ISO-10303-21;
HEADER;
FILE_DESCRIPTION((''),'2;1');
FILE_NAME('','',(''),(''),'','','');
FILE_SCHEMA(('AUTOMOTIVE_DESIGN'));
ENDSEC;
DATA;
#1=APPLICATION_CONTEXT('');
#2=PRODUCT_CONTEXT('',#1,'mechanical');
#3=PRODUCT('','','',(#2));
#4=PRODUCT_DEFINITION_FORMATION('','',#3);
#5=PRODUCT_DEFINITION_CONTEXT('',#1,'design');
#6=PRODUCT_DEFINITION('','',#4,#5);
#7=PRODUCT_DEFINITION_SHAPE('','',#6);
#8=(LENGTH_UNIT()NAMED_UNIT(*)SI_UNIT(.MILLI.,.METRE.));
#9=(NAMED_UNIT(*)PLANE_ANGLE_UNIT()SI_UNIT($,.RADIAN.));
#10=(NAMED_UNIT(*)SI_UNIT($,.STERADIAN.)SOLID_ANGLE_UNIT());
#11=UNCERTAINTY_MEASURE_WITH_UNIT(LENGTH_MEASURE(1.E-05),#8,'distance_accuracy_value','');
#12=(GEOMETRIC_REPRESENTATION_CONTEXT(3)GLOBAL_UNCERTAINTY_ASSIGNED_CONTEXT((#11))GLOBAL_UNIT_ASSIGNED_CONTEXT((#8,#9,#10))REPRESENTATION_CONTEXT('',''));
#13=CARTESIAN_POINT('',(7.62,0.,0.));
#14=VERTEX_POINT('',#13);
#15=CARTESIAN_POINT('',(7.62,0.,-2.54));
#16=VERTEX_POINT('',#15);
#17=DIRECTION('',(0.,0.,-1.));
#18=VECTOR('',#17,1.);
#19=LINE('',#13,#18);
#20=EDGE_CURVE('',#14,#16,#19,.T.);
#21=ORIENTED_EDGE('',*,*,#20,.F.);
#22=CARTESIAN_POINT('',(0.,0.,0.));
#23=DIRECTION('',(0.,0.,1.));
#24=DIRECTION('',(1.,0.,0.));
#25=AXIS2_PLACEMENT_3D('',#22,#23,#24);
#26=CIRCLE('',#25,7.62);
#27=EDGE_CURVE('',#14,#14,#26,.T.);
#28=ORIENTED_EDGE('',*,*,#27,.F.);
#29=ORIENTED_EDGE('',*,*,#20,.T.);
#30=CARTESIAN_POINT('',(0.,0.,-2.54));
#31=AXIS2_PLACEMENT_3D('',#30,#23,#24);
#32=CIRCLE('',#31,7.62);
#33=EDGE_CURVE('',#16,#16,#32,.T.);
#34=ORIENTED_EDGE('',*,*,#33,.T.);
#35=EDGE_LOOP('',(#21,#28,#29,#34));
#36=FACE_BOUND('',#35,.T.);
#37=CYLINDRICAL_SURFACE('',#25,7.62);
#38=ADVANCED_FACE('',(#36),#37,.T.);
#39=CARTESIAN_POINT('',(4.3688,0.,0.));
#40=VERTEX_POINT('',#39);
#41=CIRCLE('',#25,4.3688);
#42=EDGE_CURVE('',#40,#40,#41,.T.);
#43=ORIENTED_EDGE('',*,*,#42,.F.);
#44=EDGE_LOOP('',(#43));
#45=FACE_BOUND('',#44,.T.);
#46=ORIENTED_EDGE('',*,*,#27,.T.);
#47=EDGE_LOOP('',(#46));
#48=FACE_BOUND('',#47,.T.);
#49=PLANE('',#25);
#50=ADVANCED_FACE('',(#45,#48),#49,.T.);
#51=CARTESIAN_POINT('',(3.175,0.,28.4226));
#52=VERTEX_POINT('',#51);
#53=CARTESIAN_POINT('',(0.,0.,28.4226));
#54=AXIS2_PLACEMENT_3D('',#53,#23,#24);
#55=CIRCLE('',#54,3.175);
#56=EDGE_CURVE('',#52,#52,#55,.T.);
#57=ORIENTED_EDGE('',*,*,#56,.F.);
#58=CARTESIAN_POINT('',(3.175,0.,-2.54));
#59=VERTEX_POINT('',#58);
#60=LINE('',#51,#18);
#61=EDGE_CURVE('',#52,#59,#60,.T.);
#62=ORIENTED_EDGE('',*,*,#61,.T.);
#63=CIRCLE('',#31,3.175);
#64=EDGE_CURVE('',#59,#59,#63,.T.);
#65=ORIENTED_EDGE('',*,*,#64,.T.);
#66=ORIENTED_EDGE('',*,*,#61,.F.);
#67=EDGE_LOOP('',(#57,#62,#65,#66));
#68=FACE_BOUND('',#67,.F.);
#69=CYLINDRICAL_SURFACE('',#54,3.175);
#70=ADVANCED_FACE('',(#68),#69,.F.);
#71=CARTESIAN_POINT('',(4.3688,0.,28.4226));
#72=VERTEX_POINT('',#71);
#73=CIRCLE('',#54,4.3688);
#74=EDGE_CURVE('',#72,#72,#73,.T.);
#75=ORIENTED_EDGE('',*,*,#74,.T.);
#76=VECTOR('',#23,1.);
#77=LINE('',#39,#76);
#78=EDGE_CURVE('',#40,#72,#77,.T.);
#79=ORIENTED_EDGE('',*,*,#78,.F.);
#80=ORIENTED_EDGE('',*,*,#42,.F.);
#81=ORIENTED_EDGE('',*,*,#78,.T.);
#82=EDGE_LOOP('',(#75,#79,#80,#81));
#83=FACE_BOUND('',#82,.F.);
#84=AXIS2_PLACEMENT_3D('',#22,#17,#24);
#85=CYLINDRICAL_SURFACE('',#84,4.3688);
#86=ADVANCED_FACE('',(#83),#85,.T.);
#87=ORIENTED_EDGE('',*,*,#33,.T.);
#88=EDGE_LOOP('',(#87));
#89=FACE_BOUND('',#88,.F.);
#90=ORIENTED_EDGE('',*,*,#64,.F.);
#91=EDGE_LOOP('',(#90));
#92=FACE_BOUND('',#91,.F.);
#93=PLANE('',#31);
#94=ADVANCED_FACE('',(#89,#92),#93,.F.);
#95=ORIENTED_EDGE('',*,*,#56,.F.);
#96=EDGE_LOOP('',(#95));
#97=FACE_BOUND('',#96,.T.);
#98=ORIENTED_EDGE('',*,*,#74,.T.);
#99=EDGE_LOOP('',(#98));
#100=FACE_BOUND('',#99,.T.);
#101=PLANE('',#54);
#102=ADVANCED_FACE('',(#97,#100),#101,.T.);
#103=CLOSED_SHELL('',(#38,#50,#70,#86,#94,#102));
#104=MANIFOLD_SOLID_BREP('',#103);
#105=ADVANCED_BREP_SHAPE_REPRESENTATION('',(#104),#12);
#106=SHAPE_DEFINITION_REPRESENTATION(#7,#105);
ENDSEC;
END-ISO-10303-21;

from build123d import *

# Parameters (mm, degrees)
F0_R     = 4.3688
F1_DEPTH = 28.4226
F0_R_2   = 7.62
F2_DEPTH = 2.54
F3_R     = 3.175
F4_DEPTH = 30.9636


# Not quite as in the source:
# - a feature names something its author has since deleted; it is built from what else it names


with BuildPart() as f1:
    # F0 (on Top) → F1 (new body)
    with BuildSketch(Plane.XY):
        Circle(F0_R)
    extrude(amount=F1_DEPTH)

    # F0 (on Top) → F2 (join)
    with BuildSketch(Plane.XY):
        Circle(F0_R_2)
        Circle(F0_R, mode=Mode.SUBTRACT)
        Circle(F0_R)
    extrude(amount=-F2_DEPTH)

    # F3 (on face) → F4 (cut, through all)
    with BuildSketch(Plane.XY.offset(28.4226)):
        Circle(F3_R)
    extrude(amount=-F4_DEPTH, mode=Mode.SUBTRACT)


solid = f1.part
